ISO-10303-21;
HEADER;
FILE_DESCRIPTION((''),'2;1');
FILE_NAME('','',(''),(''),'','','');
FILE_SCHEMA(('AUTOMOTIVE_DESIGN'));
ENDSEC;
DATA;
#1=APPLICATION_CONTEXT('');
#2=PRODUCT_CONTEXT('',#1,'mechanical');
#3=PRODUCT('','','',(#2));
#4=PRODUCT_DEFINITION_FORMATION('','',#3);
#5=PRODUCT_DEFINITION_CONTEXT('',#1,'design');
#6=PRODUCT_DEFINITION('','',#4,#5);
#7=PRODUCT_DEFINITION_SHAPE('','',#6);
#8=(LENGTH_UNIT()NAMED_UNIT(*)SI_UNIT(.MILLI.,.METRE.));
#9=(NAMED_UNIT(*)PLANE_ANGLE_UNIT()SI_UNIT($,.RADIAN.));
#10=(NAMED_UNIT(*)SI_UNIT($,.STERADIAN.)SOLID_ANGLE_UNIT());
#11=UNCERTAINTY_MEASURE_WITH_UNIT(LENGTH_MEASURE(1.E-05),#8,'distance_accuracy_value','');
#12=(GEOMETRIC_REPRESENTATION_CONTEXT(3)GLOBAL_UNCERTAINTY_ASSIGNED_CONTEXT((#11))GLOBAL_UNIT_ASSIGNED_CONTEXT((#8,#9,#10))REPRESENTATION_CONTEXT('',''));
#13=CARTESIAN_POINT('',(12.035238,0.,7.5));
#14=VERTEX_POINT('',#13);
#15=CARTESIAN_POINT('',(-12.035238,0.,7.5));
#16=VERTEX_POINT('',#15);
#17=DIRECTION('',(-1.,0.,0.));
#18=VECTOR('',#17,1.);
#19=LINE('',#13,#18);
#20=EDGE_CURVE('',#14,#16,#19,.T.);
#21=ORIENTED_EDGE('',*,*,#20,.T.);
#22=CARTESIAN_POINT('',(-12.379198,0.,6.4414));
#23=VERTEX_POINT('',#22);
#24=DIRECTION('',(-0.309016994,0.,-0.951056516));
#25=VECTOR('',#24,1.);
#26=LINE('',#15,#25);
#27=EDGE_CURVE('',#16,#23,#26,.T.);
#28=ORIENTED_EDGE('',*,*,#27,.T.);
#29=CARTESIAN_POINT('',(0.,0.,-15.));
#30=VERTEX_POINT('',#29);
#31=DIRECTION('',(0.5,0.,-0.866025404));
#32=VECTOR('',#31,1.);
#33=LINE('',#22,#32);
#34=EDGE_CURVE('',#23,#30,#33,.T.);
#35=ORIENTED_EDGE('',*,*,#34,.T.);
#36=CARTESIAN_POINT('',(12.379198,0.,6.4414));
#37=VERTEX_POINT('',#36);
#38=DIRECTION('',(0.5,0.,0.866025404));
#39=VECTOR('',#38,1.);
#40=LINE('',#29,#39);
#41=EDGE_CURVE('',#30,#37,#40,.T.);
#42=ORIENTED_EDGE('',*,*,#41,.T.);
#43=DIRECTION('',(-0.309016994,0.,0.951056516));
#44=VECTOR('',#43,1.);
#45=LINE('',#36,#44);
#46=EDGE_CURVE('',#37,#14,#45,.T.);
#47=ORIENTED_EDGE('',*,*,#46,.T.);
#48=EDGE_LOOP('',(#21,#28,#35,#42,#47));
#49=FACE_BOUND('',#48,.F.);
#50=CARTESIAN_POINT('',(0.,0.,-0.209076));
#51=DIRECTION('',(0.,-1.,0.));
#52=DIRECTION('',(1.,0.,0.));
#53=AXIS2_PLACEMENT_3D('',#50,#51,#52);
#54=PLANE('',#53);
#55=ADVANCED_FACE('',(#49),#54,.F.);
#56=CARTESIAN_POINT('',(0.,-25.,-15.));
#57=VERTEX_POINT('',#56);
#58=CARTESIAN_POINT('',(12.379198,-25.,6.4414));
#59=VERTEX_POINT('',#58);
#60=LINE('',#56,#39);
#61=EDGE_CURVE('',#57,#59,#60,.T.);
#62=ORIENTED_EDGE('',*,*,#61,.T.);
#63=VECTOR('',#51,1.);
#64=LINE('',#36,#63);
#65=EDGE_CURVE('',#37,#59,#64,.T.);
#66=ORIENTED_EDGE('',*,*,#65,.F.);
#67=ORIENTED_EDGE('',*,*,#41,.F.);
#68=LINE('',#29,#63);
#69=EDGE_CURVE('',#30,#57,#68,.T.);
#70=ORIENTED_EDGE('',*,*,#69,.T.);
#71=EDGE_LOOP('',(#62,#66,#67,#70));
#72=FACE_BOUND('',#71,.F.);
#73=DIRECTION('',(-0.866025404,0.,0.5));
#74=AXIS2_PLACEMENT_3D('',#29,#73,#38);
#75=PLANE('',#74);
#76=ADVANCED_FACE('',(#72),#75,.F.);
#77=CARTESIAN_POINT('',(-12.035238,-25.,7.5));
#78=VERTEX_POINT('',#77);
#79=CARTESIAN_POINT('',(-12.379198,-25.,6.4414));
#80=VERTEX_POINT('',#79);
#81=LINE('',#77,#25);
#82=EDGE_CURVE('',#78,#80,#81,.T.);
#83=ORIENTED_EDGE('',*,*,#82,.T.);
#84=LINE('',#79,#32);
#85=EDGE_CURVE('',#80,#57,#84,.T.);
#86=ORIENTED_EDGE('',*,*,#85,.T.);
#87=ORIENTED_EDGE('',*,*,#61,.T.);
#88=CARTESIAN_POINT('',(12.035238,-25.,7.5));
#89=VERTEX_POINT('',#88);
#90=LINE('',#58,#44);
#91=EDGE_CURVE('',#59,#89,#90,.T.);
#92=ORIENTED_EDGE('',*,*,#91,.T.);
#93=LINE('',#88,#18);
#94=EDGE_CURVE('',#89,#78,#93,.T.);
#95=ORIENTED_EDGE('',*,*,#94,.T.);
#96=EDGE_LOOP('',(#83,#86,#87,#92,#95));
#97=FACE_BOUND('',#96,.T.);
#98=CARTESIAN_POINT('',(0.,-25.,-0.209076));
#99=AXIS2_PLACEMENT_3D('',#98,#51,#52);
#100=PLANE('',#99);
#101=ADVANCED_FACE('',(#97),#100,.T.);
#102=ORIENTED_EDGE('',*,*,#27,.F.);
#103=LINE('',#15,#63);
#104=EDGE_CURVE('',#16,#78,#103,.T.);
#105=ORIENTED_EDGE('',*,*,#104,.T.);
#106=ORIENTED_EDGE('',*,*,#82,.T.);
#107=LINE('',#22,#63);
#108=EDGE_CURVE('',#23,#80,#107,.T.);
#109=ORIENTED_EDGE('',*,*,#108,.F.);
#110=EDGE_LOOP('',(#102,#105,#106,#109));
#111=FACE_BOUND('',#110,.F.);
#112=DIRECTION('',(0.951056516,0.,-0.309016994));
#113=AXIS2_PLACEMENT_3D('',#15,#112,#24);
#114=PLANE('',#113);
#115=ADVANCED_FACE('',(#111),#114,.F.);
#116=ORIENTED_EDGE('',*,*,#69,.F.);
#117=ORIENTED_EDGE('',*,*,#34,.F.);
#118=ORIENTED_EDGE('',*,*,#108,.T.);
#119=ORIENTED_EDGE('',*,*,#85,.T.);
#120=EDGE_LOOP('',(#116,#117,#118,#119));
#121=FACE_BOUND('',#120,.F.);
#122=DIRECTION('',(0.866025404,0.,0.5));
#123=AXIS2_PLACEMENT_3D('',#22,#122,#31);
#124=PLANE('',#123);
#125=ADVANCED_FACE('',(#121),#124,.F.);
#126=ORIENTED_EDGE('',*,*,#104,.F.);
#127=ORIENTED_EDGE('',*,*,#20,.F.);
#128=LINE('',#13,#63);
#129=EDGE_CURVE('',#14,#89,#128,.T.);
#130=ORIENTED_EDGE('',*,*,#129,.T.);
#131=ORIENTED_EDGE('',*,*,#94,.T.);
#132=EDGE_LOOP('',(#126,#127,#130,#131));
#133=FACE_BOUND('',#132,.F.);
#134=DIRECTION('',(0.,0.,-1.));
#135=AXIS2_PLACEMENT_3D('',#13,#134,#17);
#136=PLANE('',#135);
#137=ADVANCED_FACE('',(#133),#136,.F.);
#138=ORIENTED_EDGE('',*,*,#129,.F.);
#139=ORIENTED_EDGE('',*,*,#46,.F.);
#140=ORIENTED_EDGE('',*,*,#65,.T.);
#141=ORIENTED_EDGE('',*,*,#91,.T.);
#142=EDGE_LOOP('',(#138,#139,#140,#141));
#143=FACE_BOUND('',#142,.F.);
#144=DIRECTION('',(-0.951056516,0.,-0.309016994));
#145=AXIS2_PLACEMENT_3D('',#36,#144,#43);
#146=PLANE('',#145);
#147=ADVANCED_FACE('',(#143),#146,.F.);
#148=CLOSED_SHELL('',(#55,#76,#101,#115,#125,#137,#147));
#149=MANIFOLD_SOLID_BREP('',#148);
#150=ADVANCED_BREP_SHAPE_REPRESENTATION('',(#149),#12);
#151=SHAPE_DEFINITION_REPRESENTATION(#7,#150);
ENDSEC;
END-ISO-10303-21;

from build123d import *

# Parameters (mm, degrees)
F3_DEPTH = 25


# Not quite as in the source:
# - a feature of the source that left no trace in its solid (it failed there, or was rolled back) is left out
# - the program builds the solid bodies; features that only make, move or delete a surface that nothing else refers to are left out


with BuildPart() as f3:
    # F0 (on Front) → F3 (new body)
    with BuildSketch(Plane.XZ):
        Polygon((12.3791981654, 6.4414001794), (12.0352382333, 7.5), (-12.0352382333, 7.5), (-12.3791981654, 6.4414001794), (0, -15), align=None)
    extrude(amount=F3_DEPTH)


solid = f3.part
